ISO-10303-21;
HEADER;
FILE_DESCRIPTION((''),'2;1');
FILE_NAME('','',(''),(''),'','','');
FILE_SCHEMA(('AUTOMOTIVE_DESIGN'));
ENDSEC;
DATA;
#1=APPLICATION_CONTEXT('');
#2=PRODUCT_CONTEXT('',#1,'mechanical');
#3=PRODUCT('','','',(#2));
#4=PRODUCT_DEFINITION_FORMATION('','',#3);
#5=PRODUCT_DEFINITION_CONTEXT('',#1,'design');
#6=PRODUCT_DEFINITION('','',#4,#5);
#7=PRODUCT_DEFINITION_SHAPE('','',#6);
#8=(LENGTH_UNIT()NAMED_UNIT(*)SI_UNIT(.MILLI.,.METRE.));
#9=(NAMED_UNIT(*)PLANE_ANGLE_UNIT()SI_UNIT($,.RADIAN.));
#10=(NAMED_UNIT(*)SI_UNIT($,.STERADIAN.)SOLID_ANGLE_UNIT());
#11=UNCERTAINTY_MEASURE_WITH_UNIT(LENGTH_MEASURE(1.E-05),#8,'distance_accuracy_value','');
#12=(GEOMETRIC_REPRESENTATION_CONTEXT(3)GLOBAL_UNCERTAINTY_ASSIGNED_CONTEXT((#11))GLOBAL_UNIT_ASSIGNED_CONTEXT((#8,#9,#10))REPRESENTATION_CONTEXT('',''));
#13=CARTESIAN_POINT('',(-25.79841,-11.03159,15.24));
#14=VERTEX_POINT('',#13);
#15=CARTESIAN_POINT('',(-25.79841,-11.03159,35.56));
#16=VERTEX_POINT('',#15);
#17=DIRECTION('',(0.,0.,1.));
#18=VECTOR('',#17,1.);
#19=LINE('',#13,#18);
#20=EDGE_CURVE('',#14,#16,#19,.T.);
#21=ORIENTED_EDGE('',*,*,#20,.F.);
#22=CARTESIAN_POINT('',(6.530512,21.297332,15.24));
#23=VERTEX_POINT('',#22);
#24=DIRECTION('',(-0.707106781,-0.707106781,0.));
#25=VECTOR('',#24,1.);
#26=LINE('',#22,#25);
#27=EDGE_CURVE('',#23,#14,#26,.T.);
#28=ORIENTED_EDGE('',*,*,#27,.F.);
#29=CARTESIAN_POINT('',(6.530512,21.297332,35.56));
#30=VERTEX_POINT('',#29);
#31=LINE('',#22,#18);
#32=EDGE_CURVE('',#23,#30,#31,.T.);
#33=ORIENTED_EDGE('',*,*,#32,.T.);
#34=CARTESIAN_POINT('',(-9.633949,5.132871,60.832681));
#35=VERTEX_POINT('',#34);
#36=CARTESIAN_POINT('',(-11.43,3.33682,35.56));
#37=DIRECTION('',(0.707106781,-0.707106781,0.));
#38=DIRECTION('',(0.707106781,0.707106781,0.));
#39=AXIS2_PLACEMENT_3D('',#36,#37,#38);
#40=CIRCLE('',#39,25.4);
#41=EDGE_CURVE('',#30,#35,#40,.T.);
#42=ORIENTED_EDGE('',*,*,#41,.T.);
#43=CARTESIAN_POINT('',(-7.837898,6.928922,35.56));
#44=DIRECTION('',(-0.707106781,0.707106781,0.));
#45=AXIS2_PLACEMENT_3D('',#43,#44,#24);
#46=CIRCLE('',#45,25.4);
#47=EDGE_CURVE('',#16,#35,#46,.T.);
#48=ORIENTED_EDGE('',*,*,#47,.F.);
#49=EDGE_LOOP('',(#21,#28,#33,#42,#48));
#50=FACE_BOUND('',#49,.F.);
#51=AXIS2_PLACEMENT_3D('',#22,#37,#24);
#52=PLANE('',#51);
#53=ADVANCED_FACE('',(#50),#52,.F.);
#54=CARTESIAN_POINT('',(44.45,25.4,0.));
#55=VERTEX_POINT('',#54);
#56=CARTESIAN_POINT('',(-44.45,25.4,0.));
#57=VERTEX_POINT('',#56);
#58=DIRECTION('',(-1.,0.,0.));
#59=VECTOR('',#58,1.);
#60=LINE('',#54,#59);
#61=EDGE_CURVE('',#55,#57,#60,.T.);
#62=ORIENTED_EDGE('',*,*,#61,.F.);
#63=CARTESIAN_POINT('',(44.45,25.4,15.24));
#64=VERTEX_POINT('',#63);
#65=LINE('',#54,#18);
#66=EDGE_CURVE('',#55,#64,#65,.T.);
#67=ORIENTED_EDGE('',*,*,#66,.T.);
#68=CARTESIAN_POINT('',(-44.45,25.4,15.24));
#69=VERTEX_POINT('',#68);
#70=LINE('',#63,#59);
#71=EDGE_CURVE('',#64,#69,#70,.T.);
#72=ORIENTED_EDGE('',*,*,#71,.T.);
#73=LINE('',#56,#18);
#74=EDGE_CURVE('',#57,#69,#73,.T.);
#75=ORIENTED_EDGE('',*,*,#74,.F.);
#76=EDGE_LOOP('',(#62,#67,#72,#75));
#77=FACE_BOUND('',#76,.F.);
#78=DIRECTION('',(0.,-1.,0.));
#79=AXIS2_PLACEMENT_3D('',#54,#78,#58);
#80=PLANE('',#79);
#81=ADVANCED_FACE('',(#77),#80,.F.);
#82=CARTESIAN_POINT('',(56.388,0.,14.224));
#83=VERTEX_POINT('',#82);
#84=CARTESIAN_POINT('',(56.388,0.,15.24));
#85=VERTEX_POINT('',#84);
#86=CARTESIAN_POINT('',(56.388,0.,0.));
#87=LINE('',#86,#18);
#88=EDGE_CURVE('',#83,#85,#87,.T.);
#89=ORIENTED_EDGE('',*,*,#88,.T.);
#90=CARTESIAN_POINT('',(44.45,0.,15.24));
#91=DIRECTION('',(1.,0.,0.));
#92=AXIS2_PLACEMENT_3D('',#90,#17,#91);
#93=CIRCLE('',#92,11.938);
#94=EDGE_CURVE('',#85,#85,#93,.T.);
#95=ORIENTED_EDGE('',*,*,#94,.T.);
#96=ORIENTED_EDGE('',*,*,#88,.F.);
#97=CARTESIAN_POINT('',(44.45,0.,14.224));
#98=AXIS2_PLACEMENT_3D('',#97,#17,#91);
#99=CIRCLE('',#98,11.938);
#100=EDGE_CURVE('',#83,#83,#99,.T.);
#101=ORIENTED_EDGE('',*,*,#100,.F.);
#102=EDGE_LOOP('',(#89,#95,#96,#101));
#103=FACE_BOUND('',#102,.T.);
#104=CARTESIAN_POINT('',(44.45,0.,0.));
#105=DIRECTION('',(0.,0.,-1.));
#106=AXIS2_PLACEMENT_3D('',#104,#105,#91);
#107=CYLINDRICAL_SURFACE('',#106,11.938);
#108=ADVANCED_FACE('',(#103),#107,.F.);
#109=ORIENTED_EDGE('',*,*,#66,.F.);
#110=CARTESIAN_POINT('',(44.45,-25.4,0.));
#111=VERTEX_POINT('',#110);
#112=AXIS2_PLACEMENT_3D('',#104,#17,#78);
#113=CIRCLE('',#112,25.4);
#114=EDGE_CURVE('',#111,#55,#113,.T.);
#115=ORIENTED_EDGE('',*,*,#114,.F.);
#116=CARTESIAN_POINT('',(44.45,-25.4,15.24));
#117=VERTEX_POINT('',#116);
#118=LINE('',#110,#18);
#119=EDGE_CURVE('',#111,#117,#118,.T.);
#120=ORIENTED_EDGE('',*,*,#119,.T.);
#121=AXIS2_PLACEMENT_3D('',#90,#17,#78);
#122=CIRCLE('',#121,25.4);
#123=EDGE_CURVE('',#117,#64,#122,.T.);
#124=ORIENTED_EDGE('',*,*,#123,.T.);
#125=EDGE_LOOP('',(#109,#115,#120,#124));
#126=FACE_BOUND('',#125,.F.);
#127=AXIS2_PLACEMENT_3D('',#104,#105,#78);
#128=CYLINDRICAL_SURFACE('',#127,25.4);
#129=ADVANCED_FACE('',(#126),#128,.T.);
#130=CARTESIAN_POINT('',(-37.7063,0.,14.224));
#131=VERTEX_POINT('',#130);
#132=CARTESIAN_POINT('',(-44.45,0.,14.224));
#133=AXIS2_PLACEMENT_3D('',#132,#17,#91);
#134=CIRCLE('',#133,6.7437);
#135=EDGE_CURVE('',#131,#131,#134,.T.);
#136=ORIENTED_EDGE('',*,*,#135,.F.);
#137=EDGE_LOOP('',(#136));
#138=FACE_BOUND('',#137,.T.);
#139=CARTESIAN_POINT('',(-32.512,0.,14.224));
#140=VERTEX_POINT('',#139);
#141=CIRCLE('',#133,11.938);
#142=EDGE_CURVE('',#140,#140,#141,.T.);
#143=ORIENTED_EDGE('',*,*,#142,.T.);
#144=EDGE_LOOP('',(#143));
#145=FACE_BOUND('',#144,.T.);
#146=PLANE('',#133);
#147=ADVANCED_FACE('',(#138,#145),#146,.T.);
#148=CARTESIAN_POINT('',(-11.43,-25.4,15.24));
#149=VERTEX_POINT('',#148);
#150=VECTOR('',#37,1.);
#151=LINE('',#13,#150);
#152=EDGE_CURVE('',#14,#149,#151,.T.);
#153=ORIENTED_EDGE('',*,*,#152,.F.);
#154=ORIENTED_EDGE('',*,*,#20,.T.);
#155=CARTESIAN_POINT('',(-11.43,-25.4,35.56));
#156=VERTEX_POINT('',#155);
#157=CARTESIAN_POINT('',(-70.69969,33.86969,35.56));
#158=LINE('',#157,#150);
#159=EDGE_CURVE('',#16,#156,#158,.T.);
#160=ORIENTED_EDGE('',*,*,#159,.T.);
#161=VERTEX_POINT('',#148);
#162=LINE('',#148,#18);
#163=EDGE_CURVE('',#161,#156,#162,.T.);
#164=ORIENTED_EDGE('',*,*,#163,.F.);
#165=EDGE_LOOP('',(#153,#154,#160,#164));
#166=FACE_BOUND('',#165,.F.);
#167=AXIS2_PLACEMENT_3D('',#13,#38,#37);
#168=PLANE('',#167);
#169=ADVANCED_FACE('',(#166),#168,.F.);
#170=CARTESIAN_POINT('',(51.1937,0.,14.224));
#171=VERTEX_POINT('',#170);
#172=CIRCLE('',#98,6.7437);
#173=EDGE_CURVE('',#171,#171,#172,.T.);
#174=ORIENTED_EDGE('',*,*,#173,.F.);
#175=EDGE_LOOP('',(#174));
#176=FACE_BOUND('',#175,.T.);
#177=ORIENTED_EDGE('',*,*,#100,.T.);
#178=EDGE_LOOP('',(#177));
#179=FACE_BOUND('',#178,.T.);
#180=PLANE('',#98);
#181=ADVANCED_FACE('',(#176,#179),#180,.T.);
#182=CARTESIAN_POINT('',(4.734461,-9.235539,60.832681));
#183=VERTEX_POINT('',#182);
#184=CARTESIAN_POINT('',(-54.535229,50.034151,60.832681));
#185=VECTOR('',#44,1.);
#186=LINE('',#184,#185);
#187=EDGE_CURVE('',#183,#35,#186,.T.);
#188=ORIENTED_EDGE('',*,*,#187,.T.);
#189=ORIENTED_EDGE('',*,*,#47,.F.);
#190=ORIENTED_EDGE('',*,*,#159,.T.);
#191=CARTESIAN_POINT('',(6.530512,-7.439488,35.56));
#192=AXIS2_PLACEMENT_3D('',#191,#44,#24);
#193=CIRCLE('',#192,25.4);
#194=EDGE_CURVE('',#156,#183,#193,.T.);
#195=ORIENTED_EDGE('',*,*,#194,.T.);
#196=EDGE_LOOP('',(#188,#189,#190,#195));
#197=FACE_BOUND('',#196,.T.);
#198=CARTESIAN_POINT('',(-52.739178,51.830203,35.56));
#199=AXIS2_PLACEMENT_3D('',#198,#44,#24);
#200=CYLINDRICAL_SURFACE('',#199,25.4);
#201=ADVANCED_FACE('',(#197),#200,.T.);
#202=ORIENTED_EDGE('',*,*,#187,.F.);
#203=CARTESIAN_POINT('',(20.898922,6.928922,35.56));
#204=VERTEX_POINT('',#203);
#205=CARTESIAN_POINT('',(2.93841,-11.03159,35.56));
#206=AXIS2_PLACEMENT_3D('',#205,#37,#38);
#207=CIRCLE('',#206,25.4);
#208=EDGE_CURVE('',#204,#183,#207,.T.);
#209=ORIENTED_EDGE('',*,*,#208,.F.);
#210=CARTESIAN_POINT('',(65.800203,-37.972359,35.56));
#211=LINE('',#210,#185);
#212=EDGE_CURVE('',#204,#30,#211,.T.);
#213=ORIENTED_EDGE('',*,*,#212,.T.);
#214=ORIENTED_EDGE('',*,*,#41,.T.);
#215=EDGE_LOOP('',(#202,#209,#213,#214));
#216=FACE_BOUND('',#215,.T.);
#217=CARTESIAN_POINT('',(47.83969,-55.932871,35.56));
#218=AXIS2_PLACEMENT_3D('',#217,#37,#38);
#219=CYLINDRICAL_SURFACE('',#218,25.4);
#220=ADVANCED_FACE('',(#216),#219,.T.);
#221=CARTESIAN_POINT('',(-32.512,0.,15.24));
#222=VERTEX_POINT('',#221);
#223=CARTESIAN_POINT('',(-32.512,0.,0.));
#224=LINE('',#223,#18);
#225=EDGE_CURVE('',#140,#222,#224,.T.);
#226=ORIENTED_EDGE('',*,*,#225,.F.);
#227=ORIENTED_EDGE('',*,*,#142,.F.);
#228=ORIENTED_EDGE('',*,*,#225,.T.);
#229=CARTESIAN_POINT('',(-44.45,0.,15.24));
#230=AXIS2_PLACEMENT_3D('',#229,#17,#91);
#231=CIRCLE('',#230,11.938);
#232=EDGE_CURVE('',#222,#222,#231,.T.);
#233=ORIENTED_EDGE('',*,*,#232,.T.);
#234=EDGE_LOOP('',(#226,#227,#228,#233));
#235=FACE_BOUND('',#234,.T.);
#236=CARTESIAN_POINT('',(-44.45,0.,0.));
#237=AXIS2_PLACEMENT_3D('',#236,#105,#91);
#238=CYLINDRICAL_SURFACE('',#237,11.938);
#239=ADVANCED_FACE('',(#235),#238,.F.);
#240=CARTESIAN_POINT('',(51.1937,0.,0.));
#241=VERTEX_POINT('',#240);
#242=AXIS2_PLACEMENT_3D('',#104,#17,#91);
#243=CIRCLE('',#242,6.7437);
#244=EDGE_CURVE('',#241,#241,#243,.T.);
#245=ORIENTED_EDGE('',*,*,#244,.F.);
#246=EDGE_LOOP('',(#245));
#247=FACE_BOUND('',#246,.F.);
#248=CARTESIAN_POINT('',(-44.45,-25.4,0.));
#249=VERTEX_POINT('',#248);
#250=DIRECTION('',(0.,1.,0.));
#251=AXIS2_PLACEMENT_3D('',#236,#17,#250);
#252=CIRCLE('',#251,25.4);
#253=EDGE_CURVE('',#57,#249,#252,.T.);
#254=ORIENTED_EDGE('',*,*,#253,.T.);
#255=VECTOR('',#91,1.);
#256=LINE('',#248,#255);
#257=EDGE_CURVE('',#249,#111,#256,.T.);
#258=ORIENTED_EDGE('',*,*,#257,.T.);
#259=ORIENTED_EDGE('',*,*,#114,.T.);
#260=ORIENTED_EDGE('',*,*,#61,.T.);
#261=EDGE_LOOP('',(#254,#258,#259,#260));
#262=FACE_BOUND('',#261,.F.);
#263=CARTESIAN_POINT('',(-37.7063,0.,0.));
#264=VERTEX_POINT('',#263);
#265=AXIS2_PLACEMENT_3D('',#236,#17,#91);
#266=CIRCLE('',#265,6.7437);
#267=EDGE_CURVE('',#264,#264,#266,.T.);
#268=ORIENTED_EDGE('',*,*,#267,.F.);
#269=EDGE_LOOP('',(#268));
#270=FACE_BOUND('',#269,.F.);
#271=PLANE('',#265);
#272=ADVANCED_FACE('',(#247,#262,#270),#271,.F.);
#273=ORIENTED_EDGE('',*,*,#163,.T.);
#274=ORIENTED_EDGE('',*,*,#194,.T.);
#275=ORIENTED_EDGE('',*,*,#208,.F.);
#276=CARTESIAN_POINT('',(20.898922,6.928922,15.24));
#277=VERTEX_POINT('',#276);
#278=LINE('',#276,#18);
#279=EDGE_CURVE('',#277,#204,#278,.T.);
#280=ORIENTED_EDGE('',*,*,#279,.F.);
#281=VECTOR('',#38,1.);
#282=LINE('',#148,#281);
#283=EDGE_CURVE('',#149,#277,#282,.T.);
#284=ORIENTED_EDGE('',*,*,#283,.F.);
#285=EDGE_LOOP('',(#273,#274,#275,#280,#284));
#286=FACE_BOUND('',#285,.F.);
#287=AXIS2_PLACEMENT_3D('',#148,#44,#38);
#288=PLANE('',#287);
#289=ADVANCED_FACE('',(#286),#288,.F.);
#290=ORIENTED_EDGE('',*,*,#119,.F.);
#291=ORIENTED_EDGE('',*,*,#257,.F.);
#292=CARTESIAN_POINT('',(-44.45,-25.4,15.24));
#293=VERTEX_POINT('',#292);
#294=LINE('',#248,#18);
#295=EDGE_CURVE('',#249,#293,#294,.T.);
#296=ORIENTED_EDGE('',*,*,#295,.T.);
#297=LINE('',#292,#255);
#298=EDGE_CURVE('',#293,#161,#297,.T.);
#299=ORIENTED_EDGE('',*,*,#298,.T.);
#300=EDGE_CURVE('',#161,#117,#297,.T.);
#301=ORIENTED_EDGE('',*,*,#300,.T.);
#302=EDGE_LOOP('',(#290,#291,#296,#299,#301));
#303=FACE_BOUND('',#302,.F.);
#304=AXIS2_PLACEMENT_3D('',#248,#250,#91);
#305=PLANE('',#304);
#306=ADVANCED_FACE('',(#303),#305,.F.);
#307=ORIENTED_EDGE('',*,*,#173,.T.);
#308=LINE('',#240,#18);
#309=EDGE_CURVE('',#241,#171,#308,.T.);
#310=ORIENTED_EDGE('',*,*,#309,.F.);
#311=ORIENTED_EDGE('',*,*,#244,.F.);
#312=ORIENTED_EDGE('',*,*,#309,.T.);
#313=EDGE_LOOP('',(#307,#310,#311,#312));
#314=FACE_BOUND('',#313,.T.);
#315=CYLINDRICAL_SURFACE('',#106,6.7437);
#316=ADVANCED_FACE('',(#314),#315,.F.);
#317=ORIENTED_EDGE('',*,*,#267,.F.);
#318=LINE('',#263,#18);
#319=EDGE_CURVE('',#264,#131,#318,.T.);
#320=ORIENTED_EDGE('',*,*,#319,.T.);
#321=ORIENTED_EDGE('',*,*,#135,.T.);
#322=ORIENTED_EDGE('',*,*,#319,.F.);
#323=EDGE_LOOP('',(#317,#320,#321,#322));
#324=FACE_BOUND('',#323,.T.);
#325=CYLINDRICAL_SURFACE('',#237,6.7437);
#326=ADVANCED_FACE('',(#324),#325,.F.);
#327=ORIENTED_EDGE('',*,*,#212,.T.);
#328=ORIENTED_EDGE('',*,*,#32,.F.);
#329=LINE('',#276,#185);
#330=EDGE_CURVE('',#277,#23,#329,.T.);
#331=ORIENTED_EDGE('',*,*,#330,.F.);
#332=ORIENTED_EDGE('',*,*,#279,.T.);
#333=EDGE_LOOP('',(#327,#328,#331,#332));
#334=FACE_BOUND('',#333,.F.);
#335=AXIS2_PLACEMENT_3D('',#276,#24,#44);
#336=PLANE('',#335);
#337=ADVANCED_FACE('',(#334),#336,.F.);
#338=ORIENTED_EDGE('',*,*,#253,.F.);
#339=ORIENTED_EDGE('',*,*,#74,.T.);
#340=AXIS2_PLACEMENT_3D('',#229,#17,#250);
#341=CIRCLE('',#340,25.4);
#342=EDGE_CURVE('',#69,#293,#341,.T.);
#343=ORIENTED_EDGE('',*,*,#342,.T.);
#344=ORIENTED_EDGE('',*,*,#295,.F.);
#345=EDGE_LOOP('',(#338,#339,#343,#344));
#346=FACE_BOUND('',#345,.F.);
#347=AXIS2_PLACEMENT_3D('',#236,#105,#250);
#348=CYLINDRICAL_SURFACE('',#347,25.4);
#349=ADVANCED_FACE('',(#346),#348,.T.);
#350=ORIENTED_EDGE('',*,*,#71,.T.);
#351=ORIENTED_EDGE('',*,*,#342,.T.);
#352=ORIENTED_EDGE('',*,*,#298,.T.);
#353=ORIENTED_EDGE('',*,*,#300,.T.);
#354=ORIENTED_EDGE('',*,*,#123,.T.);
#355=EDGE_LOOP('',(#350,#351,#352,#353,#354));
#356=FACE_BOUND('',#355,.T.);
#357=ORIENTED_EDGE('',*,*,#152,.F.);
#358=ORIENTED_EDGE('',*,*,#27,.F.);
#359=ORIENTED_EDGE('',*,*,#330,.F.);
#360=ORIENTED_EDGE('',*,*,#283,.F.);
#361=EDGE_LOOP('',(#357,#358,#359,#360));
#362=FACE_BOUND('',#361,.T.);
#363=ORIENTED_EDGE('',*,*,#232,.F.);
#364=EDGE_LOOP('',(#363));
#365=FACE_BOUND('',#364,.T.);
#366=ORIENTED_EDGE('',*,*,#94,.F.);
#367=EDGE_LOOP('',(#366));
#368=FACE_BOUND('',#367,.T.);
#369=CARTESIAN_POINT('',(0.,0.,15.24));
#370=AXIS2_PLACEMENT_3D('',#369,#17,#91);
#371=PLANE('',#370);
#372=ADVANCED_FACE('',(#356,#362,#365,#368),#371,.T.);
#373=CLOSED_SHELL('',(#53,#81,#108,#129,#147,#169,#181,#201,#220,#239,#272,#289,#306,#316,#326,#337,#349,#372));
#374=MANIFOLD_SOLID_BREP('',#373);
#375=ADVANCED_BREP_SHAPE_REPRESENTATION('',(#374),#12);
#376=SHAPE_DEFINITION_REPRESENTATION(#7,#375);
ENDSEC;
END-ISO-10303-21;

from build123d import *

# Parameters (mm, degrees)
F0_R        = 11.938
F1_DEPTH    = 15.24
F0_R_2      = 6.7437
F2_DEPTH    = 14.224
F5_DEPTH    = 45.72
F6_T1_DEPTH = 147.32
F6_T3_DEPTH = 147.32


# Not quite as in the source:
# - a fillet or chamfer that OpenCascade refuses, or shapes differently, is made with other operations: its cross-section is extruded or revolved along the edge and cut away or added


with BuildPart() as f1:
    # F0 (on Top) → F1 (new body)
    with BuildSketch(Plane.XY):
        with BuildLine():
            ThreePointArc((44.45, -25.4), (69.85, 0), (44.45, 25.4))
            Line((44.45, 25.4), (-44.45, 25.4))
            ThreePointArc((-44.45, 25.4), (-69.85, 0), (-44.45, -25.4))
            Line((-44.45, -25.4), (44.45, -25.4))
        make_face()
        with Locations((-44.45, 0)):
            Circle(F0_R, mode=Mode.SUBTRACT)
        with Locations((44.45, 0)):
            Circle(F0_R, mode=Mode.SUBTRACT)
    extrude(amount=F1_DEPTH)

    # F0 (on Top) → F2 (join)
    with BuildSketch(Plane.XY):
        with Locations((-44.45, 0)):
            Circle(F0_R)
        with Locations((-44.45, 0)):
            Circle(F0_R_2, mode=Mode.SUBTRACT)
        with Locations((44.45, 0)):
            Circle(F0_R)
        with Locations((44.45, 0)):
            Circle(F0_R_2, mode=Mode.SUBTRACT)
    extrude(amount=F2_DEPTH)

    # F4 (on face) → F5 (join)
    with BuildSketch(Plane.XY.offset(15.24)):
        Polygon((-25.7984097937, -11.0315902063), (-11.43, -25.4), (20.8989220358, 6.9289220358), (6.5305122421, 21.2973318296), align=None)
    extrude(amount=F5_DEPTH)

    # F6: fillet of radius 25.4 on 2 edges, made by hand

    # F6_s2 → F6_t1 (cut)
    with BuildSketch(Plane(origin=(-52.2846903991, 52.2846903991, 0), x_dir=(0, 0, 1), z_dir=(0.7071067812, -0.7071067812, 0))):
        with BuildLine():
            ThreePointArc((35.56, 26.0427427511), (53.5205122421, 18.6032549932), (60.96, 0.6427427511))
            Line((60.96, 0.6427427511), (60.96, 26.0427427511))
            Line((60.96, 26.0427427511), (35.56, 26.0427427511))
        make_face()
    extrude(amount=F6_T1_DEPTH, mode=Mode.SUBTRACT)

    # F6_s4 → F6_t3 (cut)
    with BuildSketch(Plane(origin=(51.8862806053, -51.8862806053, 0), x_dir=(0, 0, 1), z_dir=(-0.7071067812, 0.7071067812, 0))):
        with BuildLine():
            ThreePointArc((35.56, 19.6772572489), (53.5205122421, 12.237769491), (60.96, -5.7227427511))
            Line((60.96, -5.7227427511), (60.96, 19.6772572489))
            Line((60.96, 19.6772572489), (35.56, 19.6772572489))
        make_face()
    extrude(amount=F6_T3_DEPTH, mode=Mode.SUBTRACT)


solid = f1.part
